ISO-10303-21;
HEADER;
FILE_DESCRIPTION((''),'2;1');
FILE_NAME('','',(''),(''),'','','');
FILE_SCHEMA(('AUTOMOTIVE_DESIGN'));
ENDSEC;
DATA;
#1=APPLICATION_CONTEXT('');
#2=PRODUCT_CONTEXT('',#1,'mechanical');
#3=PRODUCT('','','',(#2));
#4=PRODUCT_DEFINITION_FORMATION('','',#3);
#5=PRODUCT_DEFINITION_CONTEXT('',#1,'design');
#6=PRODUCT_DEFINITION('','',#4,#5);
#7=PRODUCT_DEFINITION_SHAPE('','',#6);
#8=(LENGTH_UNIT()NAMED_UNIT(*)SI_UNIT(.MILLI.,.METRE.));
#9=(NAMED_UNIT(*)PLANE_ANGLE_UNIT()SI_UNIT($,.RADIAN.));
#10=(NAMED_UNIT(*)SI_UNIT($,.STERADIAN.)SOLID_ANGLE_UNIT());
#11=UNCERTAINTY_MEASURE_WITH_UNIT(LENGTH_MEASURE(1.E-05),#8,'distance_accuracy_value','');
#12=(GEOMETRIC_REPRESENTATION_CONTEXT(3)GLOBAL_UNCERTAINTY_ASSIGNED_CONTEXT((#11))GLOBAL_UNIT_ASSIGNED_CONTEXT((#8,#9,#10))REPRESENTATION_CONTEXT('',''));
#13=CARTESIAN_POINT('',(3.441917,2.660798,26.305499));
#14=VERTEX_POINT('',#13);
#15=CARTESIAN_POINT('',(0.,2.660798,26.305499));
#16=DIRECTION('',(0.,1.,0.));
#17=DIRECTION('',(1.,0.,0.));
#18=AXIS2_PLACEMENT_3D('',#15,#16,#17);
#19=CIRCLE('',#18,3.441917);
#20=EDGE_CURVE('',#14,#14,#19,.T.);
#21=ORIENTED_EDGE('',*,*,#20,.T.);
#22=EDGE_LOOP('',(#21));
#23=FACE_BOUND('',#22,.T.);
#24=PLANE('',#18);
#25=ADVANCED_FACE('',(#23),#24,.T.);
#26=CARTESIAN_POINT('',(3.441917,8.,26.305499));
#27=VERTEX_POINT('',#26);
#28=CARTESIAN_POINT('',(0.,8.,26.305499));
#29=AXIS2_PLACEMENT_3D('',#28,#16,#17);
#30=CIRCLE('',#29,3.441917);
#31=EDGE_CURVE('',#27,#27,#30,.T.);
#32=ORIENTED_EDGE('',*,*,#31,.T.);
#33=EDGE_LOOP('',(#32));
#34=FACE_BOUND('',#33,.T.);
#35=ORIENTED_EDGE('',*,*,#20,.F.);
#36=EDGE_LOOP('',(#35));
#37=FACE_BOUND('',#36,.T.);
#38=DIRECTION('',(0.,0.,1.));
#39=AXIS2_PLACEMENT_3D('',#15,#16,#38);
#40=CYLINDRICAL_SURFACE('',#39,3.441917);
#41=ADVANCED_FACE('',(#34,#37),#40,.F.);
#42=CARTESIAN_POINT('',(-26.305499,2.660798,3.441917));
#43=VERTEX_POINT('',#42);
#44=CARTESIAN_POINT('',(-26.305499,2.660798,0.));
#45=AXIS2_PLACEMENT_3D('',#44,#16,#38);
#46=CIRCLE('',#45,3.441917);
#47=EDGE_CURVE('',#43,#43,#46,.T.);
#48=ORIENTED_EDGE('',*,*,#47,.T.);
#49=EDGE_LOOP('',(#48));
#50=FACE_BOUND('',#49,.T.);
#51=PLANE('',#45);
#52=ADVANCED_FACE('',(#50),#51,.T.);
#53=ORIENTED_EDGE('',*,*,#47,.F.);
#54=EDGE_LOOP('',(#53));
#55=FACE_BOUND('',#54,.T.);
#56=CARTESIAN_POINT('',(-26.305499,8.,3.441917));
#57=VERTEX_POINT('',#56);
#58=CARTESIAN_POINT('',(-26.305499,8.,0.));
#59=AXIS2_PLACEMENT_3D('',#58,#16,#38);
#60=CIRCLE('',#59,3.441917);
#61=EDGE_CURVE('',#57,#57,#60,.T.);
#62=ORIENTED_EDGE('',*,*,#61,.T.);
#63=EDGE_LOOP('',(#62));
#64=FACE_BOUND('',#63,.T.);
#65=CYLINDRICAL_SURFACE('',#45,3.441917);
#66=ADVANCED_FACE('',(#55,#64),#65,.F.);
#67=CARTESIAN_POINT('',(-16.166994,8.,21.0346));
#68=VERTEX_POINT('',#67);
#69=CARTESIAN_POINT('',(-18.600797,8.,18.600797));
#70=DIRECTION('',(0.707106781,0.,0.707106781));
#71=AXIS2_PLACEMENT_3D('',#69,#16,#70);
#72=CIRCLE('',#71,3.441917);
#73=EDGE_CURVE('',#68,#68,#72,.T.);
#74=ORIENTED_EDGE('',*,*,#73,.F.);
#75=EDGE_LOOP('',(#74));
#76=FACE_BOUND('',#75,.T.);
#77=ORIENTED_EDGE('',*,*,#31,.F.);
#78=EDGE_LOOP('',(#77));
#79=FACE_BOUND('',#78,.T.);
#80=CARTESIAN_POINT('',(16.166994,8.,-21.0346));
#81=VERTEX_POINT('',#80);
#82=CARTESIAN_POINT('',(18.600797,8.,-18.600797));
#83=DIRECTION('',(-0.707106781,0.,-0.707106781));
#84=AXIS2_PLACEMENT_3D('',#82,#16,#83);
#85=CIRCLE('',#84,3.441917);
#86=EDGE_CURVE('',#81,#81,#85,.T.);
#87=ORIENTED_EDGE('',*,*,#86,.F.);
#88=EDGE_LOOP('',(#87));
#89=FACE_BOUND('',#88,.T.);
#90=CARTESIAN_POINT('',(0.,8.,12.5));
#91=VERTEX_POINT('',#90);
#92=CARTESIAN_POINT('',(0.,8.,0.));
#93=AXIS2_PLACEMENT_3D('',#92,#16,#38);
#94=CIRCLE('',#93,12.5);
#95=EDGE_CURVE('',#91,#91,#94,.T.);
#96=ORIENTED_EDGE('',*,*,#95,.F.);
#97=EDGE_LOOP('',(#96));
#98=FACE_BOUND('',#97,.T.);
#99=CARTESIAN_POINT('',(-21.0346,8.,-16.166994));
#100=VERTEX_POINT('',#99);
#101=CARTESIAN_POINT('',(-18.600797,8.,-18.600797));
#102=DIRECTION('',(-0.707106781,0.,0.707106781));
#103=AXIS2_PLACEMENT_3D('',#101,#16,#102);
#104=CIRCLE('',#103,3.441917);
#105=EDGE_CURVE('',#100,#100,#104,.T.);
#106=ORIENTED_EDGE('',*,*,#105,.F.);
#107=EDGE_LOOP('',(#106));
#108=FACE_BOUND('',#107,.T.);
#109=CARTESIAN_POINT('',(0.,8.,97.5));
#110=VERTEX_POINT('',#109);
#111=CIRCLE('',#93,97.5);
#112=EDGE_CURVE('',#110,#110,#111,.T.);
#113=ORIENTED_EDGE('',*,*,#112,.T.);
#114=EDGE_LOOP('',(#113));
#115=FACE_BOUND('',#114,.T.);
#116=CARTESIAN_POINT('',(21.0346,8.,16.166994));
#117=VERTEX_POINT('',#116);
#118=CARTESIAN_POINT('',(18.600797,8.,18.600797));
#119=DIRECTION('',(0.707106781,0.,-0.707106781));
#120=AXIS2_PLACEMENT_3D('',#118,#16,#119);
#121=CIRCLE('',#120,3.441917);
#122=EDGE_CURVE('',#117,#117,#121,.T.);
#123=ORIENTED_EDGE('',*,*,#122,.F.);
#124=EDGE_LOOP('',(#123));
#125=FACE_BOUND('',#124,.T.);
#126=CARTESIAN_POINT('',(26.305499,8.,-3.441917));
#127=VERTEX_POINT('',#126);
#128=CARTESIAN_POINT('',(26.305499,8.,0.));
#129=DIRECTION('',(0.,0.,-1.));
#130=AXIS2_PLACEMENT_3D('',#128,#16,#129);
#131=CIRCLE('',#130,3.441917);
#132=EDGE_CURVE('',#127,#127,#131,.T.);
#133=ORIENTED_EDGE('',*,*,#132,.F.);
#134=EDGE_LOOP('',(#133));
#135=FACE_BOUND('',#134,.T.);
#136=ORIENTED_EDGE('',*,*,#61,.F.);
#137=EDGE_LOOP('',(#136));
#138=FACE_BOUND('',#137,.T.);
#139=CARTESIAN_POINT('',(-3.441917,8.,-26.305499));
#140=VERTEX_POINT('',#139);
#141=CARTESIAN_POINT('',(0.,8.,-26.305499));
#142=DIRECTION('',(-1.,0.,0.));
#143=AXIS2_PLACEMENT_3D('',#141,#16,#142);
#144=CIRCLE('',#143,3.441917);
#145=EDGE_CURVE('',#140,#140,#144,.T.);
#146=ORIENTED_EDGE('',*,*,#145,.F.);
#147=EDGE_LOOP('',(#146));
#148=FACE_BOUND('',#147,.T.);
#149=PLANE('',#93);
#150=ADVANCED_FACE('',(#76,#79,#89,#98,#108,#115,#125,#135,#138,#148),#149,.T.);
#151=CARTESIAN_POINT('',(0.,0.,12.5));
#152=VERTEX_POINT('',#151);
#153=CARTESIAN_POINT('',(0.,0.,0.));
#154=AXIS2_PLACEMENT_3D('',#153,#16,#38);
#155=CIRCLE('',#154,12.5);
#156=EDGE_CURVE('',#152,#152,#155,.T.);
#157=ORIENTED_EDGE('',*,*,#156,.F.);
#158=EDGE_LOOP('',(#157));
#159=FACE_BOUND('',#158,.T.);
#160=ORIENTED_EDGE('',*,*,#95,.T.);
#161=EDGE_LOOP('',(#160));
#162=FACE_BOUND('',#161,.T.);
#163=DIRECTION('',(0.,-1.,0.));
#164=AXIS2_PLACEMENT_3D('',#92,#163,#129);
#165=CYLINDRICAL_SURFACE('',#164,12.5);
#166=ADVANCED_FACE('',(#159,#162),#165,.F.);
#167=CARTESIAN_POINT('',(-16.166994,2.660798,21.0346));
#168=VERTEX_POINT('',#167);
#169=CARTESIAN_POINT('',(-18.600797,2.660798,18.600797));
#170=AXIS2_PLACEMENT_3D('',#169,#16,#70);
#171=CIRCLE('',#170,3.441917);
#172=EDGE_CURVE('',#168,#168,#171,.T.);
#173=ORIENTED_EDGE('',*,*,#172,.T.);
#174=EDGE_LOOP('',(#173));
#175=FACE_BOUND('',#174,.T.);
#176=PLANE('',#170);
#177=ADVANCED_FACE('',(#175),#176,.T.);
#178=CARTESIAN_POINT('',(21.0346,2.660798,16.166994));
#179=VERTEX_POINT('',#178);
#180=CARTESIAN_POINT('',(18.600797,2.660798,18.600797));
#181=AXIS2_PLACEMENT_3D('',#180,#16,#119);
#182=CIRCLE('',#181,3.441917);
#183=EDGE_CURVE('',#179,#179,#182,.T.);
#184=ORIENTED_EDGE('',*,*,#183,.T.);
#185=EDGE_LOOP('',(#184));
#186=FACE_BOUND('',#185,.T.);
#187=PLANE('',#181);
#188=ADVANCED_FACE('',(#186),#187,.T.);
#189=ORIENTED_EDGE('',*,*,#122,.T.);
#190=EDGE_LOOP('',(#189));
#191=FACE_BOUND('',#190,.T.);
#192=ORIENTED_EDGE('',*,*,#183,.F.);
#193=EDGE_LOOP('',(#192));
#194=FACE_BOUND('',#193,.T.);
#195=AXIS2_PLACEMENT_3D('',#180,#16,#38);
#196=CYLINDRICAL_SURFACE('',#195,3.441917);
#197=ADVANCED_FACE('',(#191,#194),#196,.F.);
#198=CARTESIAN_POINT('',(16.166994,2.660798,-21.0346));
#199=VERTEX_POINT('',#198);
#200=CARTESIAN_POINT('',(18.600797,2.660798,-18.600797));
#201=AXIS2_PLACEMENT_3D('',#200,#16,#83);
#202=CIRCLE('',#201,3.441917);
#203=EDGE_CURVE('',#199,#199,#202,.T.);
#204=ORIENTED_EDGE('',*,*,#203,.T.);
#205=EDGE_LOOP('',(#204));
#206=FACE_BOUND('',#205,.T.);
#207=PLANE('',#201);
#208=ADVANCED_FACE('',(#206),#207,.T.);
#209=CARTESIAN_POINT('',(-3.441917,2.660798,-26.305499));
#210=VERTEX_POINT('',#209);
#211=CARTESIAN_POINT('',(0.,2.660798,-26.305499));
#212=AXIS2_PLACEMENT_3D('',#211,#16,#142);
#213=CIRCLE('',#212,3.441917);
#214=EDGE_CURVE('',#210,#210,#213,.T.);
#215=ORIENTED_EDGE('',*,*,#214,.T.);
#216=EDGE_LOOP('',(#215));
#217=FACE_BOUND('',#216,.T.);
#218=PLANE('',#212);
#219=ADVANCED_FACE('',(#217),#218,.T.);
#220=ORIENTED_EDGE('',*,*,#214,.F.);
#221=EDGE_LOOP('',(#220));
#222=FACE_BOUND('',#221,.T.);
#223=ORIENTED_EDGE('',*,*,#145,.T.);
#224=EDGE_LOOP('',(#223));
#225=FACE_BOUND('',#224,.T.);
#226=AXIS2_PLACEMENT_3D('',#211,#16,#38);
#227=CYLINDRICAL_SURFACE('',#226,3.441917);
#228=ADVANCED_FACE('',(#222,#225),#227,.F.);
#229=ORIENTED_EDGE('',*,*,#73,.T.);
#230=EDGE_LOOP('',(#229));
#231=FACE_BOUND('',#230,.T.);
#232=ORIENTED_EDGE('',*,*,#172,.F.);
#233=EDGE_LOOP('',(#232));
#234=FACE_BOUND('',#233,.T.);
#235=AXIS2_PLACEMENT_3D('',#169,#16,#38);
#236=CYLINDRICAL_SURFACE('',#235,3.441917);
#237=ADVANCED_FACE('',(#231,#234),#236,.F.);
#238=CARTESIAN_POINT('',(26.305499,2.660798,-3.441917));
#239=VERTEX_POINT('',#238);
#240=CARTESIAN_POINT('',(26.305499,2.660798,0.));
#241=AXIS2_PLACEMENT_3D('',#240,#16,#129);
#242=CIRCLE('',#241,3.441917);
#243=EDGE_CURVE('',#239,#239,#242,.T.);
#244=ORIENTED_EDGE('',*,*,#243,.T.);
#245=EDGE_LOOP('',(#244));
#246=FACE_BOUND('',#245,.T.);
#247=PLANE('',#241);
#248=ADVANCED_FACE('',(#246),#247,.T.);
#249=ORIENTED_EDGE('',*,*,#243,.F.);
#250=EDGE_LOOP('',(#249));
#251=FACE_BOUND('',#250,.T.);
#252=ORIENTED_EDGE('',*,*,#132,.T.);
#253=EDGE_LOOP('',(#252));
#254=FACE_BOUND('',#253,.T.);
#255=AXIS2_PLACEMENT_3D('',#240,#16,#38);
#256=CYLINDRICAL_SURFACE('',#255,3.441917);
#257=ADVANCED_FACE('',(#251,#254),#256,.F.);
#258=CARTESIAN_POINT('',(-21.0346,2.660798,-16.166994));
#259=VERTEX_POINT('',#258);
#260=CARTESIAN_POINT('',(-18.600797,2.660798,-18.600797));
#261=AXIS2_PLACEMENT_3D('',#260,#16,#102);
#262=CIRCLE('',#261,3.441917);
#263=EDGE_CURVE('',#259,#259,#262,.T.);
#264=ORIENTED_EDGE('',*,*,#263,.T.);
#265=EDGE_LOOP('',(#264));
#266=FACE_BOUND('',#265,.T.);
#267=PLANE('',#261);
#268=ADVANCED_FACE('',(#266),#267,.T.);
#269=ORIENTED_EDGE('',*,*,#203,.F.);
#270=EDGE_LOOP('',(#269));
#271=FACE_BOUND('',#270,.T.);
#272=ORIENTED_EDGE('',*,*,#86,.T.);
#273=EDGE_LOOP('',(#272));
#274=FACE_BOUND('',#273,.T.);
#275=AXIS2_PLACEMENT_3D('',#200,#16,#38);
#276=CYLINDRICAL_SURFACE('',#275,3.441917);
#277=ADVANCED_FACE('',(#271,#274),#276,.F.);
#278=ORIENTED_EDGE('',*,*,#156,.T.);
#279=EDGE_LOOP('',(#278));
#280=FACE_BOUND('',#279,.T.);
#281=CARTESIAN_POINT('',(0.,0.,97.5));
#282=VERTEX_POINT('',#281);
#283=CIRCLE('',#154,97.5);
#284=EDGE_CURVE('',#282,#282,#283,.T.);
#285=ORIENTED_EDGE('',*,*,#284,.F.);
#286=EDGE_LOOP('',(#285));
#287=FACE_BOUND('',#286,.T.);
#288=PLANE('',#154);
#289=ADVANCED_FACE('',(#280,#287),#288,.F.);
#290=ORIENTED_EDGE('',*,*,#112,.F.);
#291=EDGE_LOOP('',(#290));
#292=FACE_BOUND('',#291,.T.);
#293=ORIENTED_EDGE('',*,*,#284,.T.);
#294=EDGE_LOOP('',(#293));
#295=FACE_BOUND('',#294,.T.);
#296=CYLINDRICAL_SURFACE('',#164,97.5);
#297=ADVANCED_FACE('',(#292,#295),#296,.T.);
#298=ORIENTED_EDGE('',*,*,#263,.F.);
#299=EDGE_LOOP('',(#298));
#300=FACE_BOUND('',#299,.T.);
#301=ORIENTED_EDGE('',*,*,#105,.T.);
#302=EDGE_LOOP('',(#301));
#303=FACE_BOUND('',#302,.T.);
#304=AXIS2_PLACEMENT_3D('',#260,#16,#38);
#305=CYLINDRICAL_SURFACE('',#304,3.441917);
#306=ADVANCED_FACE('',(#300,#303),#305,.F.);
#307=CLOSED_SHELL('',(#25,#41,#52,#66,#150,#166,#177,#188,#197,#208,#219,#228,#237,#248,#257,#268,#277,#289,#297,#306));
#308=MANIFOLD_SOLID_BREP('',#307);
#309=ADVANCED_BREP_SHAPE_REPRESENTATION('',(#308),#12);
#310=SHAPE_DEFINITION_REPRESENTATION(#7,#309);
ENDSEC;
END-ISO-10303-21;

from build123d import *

# Parameters (mm, degrees)
SKETCH1_R           = 97.5
BOSS_EXTRUDE1_DEPTH = 8
SKETCH2_R           = 12.5
CUT_EXTRUDE1_DEPTH  = 139.117703427
SKETCH3_R           = 3.441916601
CUT_EXTRUDE2_DEPTH  = 5.339201693
CIRPATTERN1_COUNT   = 8


with BuildPart() as part:
    # Sketch1 → Boss-Extrude1 (new body)
    with BuildSketch(Plane(origin=(0, 0, 0), x_dir=(1, 0, 0), z_dir=(0, 1, 0))):
        Circle(SKETCH1_R)
    extrude(amount=BOSS_EXTRUDE1_DEPTH)

    # Sketch2 → Cut-Extrude1 (cut, through all)
    with BuildSketch(Plane(origin=(0, 0, 0), x_dir=(1, 0, 0), z_dir=(0, 1, 0))):
        Circle(SKETCH2_R)
    extrude(amount=CUT_EXTRUDE1_DEPTH, mode=Mode.SUBTRACT)

    # Sketch3 → Cut-Extrude2 (cut)
    with BuildSketch(Plane(origin=(0, 8, 0), x_dir=(1, 0, 0), z_dir=(0, 1, 0))):
        with Locations((-26.305499443, 0)):
            Circle(SKETCH3_R)
    cut_extrude2 = extrude(amount=-CUT_EXTRUDE2_DEPTH, mode=Mode.SUBTRACT)

    # CirPattern1: Cut-Extrude2 ×8 about axis
    cirpattern1_axis = Axis((0, 0, 0), (0, 1, 0))
    for i in range(1, CIRPATTERN1_COUNT):
        add(cut_extrude2.rotate(cirpattern1_axis, i * 360 / CIRPATTERN1_COUNT), mode=Mode.SUBTRACT)


solid = part.part
